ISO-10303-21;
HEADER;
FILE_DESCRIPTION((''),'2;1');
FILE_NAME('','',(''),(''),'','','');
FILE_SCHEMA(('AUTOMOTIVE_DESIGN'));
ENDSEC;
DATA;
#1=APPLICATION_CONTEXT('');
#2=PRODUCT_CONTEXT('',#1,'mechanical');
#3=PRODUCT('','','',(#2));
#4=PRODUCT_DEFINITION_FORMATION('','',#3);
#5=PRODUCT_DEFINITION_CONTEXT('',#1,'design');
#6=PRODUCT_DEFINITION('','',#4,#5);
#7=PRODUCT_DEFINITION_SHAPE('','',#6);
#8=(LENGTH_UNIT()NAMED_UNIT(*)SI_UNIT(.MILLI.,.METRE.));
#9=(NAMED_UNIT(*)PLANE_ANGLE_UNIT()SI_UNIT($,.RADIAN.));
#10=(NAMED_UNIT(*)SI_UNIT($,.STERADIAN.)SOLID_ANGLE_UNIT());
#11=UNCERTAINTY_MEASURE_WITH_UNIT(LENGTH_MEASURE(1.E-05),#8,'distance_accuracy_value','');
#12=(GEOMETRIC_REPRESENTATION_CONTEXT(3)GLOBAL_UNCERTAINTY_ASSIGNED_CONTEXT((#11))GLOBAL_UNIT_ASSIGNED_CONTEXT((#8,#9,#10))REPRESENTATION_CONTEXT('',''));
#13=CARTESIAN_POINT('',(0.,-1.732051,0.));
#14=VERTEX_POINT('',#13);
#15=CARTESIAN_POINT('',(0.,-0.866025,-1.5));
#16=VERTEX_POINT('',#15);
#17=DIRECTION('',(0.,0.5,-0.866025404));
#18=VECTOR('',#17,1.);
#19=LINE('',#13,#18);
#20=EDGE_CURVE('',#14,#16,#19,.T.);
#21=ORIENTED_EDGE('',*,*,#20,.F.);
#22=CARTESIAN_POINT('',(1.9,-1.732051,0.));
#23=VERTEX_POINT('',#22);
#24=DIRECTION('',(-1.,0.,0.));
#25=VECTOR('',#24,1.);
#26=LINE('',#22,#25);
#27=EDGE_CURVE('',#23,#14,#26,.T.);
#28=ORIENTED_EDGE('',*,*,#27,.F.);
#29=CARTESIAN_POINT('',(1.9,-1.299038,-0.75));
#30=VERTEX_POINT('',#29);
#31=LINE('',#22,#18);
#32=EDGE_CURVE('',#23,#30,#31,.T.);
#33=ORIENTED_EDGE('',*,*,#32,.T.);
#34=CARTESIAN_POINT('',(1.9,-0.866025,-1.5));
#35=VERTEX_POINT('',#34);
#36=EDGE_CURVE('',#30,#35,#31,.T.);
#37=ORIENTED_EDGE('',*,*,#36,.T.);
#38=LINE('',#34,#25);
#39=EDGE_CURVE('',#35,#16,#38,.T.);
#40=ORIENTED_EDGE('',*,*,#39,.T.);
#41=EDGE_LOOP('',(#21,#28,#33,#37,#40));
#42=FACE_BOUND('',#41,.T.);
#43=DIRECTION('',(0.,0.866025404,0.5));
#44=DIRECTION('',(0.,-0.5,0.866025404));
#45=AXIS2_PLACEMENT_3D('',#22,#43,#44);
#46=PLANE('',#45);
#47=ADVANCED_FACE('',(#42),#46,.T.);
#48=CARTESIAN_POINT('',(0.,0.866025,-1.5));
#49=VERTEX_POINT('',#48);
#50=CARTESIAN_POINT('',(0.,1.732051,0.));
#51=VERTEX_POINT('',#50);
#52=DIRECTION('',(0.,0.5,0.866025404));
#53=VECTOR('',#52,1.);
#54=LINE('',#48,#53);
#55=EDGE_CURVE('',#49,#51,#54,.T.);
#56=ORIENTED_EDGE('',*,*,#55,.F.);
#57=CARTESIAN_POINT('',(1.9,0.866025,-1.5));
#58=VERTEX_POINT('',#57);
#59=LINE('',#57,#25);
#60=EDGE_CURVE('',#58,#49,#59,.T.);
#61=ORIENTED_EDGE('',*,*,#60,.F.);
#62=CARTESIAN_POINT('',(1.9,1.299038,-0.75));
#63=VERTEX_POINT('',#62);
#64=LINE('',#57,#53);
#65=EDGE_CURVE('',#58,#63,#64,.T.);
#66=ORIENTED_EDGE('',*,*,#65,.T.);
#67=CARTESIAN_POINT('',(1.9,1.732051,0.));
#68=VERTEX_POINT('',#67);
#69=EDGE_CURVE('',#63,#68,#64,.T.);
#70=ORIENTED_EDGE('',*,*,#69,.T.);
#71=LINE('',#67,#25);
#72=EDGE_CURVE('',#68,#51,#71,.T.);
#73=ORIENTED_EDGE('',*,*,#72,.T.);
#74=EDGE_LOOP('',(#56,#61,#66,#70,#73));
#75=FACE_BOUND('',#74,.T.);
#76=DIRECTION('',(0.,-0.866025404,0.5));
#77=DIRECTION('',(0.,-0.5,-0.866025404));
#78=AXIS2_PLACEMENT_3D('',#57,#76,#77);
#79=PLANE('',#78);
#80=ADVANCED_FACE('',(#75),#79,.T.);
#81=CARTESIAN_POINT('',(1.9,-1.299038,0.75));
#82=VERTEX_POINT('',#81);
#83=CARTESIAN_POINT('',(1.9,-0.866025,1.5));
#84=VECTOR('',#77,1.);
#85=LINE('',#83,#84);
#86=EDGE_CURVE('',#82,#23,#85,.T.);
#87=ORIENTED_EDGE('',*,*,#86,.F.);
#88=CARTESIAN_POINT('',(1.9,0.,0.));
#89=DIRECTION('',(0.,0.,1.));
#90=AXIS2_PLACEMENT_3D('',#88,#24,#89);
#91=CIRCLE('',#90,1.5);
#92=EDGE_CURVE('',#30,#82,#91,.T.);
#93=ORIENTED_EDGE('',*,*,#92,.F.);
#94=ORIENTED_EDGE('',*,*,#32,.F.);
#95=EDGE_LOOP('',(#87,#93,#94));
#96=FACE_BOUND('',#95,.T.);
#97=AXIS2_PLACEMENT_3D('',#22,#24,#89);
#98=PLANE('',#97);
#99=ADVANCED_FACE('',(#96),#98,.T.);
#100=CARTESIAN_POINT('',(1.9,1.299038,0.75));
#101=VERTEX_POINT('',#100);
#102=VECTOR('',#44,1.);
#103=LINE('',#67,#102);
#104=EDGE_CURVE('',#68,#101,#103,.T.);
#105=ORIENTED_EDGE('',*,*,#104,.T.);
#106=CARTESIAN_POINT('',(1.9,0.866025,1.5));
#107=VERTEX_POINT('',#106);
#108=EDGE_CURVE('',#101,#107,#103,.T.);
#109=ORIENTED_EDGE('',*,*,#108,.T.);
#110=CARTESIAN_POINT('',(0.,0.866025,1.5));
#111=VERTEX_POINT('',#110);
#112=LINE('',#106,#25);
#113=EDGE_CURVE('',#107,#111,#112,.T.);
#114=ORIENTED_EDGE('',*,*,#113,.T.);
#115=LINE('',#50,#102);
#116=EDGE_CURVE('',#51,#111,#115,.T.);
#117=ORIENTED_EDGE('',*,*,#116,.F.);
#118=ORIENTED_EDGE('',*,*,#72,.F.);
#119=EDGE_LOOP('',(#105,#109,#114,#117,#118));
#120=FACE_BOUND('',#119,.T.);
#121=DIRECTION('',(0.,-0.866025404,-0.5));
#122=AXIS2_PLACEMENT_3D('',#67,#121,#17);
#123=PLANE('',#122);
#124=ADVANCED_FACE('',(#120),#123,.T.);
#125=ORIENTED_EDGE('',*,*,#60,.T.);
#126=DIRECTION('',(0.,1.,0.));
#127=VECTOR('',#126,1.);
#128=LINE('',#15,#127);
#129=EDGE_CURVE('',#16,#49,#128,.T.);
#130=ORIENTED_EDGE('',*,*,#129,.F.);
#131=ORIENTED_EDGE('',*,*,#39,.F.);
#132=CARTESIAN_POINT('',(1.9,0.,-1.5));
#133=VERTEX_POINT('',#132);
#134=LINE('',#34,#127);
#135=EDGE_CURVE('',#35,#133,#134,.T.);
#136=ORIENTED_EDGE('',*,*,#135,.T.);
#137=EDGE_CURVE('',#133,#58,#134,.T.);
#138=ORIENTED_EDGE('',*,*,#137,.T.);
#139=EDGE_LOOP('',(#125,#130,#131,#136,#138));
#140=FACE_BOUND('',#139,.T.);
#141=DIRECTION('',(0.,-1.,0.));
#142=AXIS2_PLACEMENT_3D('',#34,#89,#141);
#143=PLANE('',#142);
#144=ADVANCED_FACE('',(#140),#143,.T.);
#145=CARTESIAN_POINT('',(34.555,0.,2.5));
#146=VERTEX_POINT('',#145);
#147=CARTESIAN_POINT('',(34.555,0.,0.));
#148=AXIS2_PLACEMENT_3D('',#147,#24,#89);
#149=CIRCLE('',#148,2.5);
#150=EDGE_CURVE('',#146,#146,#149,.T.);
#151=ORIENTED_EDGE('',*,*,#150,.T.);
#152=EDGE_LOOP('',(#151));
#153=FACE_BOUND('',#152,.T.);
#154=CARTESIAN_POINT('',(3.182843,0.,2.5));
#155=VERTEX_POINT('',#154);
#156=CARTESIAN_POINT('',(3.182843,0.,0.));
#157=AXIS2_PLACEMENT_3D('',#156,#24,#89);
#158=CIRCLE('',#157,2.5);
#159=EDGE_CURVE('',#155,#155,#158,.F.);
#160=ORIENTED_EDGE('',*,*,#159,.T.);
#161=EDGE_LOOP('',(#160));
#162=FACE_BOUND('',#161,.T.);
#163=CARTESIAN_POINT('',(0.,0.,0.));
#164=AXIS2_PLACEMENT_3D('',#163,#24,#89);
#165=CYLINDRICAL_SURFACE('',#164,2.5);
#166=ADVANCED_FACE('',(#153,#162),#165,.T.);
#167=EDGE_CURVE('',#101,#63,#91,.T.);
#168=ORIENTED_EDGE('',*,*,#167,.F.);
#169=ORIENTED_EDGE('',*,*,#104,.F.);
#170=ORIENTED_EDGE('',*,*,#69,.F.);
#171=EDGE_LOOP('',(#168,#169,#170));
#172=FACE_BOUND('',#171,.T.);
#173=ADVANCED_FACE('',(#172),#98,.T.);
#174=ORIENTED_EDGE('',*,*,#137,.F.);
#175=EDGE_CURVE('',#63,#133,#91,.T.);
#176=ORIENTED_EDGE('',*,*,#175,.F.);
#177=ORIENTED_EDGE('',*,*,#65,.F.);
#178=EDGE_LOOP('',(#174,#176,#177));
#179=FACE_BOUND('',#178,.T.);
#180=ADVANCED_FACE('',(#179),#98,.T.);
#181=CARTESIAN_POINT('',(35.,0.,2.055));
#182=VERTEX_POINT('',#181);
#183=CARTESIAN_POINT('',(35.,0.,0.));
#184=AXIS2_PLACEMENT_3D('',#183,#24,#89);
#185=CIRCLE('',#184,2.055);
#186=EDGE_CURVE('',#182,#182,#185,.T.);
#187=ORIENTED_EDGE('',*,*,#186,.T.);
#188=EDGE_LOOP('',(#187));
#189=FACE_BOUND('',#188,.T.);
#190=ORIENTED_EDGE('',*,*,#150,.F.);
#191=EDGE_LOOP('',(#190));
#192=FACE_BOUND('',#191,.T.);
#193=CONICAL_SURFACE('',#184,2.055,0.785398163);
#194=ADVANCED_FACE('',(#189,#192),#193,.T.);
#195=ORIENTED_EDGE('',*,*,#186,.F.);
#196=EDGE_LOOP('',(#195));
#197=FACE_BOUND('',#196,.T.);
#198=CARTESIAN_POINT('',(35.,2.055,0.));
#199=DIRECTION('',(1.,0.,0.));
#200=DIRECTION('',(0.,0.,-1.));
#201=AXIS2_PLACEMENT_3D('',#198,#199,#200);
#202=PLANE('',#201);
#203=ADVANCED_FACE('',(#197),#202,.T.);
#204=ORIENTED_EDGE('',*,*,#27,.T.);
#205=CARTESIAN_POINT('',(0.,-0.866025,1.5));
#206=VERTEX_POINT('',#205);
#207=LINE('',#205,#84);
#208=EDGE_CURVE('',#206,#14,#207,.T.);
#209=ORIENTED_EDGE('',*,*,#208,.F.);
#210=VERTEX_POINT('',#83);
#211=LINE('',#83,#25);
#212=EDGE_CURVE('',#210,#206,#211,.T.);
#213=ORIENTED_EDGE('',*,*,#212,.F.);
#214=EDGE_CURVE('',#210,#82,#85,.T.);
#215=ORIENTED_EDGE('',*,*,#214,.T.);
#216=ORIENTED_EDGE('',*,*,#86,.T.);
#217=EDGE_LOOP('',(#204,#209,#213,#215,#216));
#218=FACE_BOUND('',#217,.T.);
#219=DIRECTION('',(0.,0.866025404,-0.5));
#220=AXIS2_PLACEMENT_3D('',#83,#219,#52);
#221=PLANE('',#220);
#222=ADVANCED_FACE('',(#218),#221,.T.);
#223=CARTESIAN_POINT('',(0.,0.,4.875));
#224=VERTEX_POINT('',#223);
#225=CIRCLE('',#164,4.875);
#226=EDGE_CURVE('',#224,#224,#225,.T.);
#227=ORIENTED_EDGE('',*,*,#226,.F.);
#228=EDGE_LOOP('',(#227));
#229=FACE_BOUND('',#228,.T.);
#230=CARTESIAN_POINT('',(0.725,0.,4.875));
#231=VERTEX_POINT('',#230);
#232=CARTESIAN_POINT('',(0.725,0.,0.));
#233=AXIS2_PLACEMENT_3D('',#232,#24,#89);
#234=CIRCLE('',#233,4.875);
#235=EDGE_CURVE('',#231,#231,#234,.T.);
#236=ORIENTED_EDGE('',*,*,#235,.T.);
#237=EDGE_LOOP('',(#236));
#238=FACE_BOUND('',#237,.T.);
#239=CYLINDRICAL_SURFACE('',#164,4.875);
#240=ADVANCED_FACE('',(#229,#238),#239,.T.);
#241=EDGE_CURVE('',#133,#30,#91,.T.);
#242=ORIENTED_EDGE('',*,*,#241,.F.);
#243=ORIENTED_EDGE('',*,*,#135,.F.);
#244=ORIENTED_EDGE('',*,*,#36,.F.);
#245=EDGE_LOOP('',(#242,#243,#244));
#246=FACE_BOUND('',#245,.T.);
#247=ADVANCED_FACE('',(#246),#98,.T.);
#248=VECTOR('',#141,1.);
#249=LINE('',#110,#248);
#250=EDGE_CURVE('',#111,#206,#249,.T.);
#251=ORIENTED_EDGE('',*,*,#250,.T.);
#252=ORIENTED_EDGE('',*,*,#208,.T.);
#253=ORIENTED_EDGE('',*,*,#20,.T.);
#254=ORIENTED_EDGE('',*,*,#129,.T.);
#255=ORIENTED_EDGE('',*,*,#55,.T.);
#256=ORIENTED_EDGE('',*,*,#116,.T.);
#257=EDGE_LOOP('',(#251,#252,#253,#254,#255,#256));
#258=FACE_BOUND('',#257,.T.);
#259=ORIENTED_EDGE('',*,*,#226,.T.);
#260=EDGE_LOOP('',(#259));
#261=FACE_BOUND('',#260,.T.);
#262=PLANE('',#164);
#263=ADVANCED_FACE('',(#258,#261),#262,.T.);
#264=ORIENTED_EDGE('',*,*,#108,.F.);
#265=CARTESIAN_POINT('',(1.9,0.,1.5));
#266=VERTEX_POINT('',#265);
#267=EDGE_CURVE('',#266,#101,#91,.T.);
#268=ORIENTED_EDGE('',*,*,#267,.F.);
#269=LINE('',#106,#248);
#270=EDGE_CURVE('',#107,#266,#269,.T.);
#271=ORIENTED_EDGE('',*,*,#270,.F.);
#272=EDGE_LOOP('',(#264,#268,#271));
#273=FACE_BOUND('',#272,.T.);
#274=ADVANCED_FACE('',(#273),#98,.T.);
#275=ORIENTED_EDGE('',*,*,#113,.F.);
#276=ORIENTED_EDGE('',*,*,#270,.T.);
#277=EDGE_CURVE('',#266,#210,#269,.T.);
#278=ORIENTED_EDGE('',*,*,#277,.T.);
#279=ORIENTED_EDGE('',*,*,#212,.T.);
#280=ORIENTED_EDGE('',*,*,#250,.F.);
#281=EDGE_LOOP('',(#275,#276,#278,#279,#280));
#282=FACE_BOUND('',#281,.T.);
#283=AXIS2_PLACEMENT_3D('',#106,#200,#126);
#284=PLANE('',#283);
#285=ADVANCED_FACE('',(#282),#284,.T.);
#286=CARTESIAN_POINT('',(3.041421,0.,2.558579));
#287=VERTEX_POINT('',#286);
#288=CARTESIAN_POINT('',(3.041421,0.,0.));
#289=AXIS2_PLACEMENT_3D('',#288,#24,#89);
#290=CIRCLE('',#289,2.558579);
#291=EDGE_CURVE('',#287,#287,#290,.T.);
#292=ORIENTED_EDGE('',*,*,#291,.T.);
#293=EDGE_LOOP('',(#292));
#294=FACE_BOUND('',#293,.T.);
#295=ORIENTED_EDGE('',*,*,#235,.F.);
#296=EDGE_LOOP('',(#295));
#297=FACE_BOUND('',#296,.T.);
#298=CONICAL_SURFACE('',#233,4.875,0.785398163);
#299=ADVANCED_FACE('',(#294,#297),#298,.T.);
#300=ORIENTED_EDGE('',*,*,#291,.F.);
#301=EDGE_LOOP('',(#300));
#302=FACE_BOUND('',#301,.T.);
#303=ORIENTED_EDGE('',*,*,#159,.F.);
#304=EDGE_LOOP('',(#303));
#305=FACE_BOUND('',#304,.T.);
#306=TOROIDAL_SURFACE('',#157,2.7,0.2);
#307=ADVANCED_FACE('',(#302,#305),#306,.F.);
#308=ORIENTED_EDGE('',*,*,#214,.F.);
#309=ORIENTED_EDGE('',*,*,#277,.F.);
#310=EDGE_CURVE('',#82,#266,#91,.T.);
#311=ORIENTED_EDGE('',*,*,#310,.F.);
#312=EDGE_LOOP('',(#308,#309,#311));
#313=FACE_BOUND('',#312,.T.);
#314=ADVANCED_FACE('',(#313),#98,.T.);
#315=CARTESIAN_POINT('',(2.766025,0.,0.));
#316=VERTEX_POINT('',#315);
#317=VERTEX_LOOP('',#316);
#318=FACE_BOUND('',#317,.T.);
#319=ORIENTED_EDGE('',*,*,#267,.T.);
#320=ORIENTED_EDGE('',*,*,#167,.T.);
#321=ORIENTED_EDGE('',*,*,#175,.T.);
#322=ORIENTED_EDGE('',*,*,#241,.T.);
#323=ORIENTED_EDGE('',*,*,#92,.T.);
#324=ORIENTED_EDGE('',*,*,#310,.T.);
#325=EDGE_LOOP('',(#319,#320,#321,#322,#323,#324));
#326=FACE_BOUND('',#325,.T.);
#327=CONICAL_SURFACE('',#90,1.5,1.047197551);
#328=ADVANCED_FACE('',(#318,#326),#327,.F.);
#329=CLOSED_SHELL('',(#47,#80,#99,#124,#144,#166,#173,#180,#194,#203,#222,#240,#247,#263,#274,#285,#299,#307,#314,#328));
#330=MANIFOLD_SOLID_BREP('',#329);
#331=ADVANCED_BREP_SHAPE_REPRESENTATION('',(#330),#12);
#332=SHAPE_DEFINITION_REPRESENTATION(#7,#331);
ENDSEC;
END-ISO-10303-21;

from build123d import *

# Parameters (mm, degrees)
FILLET1_R   = 0.2
HEX_START   = -1.9
HEX_2_DEPTH = 1.9


with BuildPart() as part:
    # BodySke → BaseBody (revolve)
    with BuildSketch(Plane.XY, mode=Mode.PRIVATE) as basebody_sk:
        Polygon((0, 0), (0, 4.875), (0.725, 4.875), (3.1, 2.5), (34.555, 2.5), (35, 2.055), (35, 0), align=None)
    revolve(basebody_sk.sketch.rotate(Axis((0, 0, 0), (1, 0, 0)), 90), axis=Axis((0, 0, 0), (1, 0, 0)))

    # Fillet1
    fillet1_edges = [part.edges().sort_by_distance(p)[0] for p in [
        (3.1, 0, -2.5),
    ]]
    fillet(fillet1_edges, radius=FILLET1_R)

    # Hex 2: read off the stored shape, not the designer's step
    # Hex 2 outline → Hex 2 (cut)
    with BuildSketch(Plane.ZY.offset(HEX_START)):
        Polygon((-1.5, -0.866025404), (0, -1.732050808), (1.5, -0.866025404), (1.5, 0.866025404), (0, 1.732050808), (-1.5, 0.866025404), align=None)
    extrude(amount=HEX_2_DEPTH, mode=Mode.SUBTRACT)

    # Hex 2 2 outline → Hex 2 2 (revolve, cut)
    with BuildSketch(Plane.YX):
        Polygon((1.5, 1.9), (0, 2.766025404), (0, 1.9), align=None)
    revolve(axis=Axis((0, 0, 0), (1, 0, 0)), mode=Mode.SUBTRACT)


solid = part.part
